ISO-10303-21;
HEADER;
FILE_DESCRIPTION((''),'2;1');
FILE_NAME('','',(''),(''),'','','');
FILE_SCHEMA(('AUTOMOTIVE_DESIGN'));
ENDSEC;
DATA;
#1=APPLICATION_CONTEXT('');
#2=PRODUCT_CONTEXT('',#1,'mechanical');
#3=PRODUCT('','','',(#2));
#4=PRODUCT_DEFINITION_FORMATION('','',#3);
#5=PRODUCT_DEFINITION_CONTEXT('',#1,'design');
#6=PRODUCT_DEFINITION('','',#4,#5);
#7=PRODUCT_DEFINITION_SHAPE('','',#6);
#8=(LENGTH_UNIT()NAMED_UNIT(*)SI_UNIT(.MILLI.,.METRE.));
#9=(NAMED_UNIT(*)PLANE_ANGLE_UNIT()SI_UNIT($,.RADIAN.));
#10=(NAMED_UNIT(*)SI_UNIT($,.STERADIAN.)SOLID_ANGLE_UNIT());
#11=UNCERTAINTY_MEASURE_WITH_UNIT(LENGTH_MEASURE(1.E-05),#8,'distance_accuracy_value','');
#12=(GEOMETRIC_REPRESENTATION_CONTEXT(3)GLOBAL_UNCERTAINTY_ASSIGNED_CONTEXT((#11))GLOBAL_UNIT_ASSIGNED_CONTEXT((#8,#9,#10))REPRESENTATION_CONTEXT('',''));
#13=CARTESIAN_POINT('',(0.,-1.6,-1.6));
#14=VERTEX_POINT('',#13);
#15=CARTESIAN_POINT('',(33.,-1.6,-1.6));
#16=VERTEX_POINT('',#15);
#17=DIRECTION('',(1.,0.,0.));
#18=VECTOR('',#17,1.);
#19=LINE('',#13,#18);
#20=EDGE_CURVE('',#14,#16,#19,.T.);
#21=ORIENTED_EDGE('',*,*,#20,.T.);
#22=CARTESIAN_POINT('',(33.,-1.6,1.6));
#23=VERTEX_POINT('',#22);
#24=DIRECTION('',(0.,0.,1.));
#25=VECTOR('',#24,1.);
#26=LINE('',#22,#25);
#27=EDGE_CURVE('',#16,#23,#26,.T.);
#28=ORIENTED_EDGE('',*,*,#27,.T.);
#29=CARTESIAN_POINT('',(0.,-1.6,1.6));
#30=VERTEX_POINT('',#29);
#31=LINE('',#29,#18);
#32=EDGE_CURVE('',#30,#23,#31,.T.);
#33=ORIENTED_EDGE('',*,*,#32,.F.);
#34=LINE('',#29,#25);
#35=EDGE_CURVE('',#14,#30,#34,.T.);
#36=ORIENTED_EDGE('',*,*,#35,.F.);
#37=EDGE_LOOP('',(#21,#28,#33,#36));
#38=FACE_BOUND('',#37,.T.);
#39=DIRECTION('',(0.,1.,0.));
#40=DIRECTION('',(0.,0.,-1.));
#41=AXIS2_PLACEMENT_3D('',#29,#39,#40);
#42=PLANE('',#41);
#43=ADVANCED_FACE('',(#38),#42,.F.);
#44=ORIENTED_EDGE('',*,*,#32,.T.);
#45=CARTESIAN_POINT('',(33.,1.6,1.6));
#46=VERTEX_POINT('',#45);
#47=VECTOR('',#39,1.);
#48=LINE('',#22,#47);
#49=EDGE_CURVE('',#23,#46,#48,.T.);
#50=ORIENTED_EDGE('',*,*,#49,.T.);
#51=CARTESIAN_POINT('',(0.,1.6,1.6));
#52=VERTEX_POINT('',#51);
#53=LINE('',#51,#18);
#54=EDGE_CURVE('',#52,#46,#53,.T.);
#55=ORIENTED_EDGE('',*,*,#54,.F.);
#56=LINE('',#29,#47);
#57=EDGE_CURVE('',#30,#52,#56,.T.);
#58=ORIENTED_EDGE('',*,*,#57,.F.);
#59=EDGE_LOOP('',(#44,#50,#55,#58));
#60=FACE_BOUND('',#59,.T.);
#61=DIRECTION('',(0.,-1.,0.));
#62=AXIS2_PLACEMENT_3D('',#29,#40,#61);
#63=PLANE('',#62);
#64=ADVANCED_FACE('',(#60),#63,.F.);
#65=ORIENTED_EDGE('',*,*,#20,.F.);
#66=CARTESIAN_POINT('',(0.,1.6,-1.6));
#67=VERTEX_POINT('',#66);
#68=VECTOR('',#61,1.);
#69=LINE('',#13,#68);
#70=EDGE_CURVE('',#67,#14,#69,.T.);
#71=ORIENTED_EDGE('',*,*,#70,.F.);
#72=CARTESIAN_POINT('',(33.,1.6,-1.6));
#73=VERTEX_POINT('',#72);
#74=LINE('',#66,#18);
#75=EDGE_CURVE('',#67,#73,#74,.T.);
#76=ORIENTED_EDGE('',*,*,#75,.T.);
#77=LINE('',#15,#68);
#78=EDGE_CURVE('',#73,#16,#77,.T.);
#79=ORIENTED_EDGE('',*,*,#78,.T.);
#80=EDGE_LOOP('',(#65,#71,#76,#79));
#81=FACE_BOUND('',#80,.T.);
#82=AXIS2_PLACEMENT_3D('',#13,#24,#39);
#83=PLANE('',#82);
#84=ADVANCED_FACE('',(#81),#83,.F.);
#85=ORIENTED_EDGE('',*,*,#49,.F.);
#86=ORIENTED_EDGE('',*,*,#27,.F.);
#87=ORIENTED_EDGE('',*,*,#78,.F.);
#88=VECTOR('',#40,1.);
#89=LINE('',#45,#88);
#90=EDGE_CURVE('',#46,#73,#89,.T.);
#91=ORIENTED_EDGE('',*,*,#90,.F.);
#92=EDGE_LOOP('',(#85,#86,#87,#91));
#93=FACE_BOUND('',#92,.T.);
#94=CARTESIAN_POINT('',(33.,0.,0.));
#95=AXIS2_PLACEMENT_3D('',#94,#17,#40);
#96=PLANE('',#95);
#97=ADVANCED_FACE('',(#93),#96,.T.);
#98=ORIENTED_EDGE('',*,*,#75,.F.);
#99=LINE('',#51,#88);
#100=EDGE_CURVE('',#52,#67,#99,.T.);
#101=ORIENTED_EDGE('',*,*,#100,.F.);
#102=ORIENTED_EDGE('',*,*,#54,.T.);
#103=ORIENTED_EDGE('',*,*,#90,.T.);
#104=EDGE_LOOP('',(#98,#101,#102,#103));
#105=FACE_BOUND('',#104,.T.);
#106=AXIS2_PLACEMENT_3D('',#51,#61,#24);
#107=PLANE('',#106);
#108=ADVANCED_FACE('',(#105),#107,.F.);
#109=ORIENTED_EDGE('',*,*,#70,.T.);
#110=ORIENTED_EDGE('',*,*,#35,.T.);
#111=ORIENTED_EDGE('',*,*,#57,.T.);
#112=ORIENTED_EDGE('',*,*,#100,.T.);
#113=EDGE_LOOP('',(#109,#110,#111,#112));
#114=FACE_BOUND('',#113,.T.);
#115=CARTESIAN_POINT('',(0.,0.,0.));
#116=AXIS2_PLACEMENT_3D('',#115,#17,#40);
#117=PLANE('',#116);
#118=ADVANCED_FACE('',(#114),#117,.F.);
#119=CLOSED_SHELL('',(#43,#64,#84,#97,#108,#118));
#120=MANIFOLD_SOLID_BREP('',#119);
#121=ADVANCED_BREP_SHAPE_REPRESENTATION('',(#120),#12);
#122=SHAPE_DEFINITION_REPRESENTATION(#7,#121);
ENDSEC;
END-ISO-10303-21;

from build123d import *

# Parameters (mm, degrees)
SKETCH2_W             = 3.2
SKETCH2_H             = 3.2
BOSS_EXTRUDE1_DEPTH   = 33
BODY_MOVE_COPY1_ANGLE = 90


with BuildPart() as part:
    # Sketch2 → Boss-Extrude1 (new body)
    with BuildSketch(Plane(origin=(0, 0, 0), x_dir=(1, 0, 0), z_dir=(0, 1, 0))):
        Rectangle(SKETCH2_W, SKETCH2_H)
    extrude(amount=BOSS_EXTRUDE1_DEPTH)


with BuildPart() as part_1:
    # Body-Move/Copy1: moved
    add(part.part.rotate(Axis((0, 33, 0), (0, 0, 1)), BODY_MOVE_COPY1_ANGLE))


with BuildPart() as part_2:
    # Body-Move/Copy3: read off the stored shape, not the designer's step
    # Body-Move/Copy3: moved
    add(part_1.part.moved(Location((0, -33, 0))))


solid = part_2.part
